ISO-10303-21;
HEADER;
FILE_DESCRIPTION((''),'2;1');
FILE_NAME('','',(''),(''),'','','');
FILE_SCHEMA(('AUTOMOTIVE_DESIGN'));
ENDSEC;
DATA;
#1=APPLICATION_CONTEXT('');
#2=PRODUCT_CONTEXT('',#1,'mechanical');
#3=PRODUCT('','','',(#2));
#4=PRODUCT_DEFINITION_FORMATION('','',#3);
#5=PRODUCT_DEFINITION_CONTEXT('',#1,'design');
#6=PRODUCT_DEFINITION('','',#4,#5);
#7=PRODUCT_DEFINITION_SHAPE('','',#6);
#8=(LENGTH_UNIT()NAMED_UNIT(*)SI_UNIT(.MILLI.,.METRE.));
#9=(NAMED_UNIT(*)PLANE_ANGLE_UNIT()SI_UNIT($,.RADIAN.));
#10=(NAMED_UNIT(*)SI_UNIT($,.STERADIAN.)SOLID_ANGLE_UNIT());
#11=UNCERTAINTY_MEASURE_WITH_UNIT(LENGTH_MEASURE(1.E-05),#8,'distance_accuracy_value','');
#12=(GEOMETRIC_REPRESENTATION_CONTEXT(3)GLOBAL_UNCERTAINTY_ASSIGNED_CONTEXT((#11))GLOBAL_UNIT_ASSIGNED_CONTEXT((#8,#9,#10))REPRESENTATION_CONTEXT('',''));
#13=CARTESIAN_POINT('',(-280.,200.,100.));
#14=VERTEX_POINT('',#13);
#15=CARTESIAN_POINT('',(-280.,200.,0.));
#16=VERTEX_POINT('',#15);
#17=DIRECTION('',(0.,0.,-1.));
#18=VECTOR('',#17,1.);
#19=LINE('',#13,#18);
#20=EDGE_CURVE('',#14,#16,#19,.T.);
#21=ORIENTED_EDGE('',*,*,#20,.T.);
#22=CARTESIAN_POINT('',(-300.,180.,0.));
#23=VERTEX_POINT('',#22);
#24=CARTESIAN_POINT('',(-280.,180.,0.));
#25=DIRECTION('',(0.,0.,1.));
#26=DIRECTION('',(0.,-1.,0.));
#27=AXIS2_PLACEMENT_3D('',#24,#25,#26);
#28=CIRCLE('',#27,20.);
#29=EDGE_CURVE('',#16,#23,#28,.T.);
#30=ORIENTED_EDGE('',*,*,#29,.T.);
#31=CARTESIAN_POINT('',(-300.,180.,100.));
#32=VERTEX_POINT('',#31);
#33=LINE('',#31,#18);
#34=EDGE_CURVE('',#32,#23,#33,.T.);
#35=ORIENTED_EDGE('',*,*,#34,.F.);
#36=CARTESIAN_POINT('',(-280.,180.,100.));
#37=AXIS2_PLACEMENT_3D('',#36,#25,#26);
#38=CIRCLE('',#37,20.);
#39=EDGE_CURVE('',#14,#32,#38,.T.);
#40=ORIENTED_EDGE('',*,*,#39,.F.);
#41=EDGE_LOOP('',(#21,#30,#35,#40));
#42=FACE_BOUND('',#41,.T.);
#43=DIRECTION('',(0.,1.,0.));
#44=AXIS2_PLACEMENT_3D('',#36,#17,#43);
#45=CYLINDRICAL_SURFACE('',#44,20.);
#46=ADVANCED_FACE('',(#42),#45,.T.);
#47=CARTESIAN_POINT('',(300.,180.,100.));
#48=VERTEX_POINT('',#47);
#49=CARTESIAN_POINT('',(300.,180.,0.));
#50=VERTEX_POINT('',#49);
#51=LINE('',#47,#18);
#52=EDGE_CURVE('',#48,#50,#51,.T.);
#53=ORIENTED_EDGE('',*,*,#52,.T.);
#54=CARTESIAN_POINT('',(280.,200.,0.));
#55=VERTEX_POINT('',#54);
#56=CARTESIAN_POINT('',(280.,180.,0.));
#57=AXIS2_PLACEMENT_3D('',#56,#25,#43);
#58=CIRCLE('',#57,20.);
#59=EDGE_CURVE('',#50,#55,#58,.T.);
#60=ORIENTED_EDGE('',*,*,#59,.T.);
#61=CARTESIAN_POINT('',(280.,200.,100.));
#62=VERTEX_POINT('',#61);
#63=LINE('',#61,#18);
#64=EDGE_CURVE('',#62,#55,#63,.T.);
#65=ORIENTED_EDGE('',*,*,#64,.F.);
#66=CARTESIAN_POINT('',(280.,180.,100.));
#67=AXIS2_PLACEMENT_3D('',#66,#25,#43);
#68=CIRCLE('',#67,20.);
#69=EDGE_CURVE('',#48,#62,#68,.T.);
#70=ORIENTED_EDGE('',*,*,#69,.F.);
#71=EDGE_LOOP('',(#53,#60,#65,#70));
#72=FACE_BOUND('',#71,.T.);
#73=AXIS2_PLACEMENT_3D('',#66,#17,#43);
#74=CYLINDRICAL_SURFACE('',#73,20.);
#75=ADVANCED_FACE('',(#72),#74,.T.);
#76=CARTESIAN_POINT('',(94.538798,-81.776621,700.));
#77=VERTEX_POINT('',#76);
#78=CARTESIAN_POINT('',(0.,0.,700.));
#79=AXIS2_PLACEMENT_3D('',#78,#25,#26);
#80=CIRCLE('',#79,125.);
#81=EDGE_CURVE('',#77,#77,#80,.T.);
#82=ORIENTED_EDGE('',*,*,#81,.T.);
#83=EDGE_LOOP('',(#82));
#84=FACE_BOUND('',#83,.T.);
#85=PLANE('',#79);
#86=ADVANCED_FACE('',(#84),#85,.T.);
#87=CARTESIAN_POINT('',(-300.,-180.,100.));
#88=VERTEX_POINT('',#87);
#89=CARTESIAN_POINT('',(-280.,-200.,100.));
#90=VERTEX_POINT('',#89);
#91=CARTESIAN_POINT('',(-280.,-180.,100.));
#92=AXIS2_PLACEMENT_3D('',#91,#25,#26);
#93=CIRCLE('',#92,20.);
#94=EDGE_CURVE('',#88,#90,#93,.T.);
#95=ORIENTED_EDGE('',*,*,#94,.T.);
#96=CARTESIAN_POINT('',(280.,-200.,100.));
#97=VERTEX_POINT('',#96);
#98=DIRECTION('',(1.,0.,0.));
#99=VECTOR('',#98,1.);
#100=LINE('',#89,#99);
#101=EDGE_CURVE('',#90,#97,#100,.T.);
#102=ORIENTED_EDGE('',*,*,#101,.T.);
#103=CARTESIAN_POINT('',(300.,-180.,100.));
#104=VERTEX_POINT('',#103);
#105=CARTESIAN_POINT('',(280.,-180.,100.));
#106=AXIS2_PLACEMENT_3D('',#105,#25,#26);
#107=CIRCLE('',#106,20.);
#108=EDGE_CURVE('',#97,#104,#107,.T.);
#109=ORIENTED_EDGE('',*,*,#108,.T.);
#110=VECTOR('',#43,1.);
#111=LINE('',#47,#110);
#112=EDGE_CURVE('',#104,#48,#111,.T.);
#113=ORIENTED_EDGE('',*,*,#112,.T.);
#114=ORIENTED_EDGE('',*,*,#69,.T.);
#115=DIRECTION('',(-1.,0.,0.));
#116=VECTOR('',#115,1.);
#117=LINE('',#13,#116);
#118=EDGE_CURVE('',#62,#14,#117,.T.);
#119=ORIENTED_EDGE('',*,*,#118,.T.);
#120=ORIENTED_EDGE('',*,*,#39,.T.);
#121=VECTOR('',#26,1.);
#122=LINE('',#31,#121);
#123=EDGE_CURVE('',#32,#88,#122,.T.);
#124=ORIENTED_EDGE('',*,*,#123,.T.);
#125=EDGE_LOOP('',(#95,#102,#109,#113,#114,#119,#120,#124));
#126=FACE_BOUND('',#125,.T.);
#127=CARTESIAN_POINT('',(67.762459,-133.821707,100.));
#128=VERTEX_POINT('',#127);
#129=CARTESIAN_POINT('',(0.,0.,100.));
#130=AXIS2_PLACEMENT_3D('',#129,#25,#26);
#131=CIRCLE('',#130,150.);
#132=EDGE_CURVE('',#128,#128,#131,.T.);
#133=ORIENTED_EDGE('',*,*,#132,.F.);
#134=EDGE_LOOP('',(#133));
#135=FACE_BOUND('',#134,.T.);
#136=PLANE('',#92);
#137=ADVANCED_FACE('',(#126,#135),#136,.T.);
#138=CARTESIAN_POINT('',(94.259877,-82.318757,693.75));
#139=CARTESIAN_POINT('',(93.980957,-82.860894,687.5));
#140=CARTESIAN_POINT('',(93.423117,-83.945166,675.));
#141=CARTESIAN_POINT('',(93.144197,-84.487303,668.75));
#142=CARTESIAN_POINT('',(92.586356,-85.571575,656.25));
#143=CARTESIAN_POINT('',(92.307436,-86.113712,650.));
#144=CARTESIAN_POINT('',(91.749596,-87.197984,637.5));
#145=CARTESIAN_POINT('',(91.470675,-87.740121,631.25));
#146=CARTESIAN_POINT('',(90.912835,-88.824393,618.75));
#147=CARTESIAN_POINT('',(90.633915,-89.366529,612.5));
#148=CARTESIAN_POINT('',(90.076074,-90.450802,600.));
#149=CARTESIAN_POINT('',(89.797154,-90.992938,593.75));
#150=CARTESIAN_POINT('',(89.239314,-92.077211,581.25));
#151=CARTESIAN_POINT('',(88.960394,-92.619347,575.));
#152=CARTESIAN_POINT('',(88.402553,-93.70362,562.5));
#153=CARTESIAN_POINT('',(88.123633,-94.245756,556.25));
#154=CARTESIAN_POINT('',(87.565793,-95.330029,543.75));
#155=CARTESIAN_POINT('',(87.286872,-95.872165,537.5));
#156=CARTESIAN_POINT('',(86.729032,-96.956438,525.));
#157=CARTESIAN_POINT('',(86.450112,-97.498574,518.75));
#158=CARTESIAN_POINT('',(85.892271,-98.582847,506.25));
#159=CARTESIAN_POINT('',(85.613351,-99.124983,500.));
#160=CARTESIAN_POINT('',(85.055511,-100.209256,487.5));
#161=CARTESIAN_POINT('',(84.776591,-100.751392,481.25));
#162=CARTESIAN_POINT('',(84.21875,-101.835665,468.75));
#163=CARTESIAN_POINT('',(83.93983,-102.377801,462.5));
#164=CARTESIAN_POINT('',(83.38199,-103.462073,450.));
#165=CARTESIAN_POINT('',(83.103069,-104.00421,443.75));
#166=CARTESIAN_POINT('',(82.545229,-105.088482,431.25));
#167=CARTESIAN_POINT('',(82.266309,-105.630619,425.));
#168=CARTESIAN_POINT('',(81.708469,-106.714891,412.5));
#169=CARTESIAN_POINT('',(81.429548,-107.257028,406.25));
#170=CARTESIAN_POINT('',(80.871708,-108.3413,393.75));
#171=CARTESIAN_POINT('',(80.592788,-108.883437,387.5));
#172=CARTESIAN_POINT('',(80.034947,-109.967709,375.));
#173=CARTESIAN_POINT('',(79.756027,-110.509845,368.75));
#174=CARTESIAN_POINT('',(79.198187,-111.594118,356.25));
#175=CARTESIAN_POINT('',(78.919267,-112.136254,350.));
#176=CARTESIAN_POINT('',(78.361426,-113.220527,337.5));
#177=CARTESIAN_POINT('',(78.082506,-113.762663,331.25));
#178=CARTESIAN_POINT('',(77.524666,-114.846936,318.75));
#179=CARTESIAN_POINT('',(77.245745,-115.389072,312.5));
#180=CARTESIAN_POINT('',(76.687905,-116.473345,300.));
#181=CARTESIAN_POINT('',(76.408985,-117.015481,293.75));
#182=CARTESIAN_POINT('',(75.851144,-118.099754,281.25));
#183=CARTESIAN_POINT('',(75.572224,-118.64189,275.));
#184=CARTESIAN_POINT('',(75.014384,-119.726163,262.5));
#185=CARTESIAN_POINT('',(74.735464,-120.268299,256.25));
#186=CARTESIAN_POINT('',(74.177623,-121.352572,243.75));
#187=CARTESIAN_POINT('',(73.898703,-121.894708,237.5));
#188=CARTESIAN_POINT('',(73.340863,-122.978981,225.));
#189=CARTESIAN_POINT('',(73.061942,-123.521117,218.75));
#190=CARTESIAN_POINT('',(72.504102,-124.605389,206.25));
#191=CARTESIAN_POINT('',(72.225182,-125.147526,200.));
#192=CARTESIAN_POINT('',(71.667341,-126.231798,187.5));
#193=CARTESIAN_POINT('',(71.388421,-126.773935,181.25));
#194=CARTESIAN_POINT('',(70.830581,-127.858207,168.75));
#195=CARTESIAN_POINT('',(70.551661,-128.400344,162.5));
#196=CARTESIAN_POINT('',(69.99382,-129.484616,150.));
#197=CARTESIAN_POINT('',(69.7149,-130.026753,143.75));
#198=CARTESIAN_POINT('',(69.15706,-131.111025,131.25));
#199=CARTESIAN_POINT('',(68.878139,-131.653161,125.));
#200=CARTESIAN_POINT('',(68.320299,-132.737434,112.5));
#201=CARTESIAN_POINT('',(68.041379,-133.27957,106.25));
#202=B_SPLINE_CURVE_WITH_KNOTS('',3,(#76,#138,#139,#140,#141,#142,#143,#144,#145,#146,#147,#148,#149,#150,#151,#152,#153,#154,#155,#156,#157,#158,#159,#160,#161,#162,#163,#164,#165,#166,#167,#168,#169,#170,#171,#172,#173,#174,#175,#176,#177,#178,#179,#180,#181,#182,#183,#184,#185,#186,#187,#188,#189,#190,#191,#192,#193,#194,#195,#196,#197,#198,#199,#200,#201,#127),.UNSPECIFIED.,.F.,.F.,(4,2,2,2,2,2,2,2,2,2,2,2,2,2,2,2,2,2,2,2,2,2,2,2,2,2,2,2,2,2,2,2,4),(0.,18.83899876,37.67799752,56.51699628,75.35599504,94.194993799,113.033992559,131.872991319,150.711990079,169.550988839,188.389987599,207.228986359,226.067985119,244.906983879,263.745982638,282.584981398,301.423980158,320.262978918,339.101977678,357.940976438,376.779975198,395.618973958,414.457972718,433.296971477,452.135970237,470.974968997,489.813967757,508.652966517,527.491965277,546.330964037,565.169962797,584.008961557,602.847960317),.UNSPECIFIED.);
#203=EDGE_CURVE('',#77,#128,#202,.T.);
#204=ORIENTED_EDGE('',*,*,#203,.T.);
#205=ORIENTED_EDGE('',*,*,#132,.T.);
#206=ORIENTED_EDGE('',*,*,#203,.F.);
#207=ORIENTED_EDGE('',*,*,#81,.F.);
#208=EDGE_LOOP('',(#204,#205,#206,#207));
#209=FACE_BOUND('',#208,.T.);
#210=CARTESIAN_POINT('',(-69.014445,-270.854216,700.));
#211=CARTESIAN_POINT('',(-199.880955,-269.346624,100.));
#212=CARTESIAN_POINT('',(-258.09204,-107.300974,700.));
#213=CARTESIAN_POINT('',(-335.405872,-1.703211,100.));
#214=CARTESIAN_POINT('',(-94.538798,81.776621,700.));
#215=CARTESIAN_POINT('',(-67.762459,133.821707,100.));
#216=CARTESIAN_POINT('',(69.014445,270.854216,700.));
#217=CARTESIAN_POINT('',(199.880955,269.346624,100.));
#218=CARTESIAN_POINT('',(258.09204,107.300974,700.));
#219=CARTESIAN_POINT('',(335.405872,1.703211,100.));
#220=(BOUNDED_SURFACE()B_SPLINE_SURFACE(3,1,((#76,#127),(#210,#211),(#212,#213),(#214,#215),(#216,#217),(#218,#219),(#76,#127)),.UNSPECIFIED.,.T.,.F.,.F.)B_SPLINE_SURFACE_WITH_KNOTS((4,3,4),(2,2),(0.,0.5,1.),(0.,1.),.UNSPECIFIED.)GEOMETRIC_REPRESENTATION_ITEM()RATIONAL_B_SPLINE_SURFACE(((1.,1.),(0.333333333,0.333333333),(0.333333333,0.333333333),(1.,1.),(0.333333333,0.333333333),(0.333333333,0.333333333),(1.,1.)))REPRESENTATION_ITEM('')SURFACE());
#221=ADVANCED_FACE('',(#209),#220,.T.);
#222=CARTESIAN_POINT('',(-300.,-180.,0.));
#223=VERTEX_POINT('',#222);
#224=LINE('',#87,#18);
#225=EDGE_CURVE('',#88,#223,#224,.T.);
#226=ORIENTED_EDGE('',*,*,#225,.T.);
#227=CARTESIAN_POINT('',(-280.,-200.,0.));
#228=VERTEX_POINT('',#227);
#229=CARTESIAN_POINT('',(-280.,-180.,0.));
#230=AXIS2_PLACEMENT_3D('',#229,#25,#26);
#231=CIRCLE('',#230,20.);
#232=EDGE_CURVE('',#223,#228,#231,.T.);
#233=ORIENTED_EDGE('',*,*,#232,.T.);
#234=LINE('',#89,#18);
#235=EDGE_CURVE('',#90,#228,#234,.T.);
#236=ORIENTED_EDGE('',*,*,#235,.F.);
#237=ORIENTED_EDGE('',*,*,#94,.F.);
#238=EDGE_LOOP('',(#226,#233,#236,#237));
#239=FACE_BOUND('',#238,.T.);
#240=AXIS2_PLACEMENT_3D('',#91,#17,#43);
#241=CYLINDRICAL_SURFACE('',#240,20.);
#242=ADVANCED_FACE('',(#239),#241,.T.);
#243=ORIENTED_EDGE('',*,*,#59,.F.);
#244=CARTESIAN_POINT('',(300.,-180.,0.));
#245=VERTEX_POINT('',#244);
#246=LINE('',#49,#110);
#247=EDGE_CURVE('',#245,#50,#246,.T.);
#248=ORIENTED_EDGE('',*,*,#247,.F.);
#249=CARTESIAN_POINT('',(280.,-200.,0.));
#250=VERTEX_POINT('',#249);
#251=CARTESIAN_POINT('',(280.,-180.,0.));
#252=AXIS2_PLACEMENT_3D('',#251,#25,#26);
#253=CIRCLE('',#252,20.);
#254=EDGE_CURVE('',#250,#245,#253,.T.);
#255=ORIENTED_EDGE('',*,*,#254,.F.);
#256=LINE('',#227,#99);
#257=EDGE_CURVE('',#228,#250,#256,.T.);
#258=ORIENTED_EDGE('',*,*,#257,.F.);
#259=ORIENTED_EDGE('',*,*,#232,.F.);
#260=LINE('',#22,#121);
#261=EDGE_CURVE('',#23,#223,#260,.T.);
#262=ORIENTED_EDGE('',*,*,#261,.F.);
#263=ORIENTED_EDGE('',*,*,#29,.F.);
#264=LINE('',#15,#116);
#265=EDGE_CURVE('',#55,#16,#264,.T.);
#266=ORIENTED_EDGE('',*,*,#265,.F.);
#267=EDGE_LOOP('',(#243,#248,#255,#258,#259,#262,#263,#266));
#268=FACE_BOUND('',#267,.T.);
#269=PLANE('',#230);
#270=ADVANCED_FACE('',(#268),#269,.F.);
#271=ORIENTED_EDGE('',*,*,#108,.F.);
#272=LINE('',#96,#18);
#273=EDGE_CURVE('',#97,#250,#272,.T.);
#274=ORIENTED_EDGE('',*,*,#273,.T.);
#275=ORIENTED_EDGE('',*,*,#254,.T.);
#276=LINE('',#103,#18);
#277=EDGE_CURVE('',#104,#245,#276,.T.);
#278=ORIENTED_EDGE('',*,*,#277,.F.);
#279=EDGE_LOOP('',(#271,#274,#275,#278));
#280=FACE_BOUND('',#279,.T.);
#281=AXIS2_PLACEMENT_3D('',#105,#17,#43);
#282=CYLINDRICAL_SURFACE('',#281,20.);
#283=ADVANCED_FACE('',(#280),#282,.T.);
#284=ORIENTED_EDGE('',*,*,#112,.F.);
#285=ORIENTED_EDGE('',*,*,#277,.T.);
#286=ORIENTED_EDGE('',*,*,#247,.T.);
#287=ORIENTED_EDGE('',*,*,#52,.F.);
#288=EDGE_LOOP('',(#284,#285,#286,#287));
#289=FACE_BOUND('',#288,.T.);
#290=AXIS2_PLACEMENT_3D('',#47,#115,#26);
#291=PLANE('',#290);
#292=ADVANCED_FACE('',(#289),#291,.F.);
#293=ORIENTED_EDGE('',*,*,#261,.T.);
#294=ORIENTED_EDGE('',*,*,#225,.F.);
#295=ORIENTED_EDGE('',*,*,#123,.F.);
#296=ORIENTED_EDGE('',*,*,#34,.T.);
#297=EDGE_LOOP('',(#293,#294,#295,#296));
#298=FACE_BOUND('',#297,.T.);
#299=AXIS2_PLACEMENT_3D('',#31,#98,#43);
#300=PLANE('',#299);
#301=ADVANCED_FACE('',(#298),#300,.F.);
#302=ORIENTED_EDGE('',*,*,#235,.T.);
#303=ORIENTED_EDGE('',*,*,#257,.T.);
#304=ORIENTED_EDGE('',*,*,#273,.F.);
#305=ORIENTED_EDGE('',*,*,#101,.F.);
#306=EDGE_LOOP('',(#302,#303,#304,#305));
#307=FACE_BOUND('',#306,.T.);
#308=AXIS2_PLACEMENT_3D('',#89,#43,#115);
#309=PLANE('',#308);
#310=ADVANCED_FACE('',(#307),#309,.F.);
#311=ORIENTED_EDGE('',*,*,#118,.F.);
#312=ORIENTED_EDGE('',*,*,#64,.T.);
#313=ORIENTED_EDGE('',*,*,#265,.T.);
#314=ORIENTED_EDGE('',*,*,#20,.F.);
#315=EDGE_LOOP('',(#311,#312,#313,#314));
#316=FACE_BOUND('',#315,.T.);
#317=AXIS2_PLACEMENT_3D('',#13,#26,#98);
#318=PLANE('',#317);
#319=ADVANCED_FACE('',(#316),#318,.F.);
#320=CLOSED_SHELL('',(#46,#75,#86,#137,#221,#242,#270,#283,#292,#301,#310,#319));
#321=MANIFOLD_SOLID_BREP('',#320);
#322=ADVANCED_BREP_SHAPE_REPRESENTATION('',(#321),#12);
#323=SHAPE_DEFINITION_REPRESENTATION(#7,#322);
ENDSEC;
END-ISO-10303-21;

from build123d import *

# Parameters (mm, degrees)
BOSS_EXTRUDE3_DEPTH   = 100
BODY_MOVE_COPY2_ANGLE = 90


with BuildPart() as part:
    # Sketch4 → Boss-Extrude3 (new body)
    with BuildSketch(Plane(origin=(0, 0, 0), x_dir=(1, 0, 0), z_dir=(0, 1, 0))):
        with BuildLine():
            Line((-280, 200), (280, 200))
            ThreePointArc((280, 200), (294.142135624, 194.142135624), (300, 180))
            Line((300, 180), (300, -180))
            ThreePointArc((300, -180), (294.142135624, -194.142135624), (280, -200))
            Line((280, -200), (-280, -200))
            ThreePointArc((-280, -200), (-294.142135624, -194.142135624), (-300, -180))
            Line((-300, -180), (-300, 180))
            ThreePointArc((-300, 180), (-294.142135624, 194.142135624), (-280, 200))
        make_face()
    extrude(amount=BOSS_EXTRUDE3_DEPTH)

    # Loft1: read off the stored shape, not the designer's step
    # Loft1: loft between two sections, ruled curve by curve
    loft1_from = [
        Edge.make_bspline([(94.538797531, 700, 81.776621117), (-69.014444703, 700, 270.85421618), (-258.092039765, 700, 107.300973946), (-94.538797531, 700, -81.776621117), (69.014444703, 700, -270.85421618), (258.092039765, 700, -107.300973946), (94.538797531, 700, 81.776621117)], [0, 0, 0, 0, 0.5, 0.5, 0.5, 1, 1, 1, 1], 3, [1, 0.333333333, 0.333333333, 1, 0.333333333, 0.333333333, 1]),
    ]
    loft1_to = [
        Edge.make_bspline([(67.762458695, 100, 133.821706728), (-199.880954762, 100, 269.346624118), (-335.405872151, 100, 1.703210661), (-67.762458695, 100, -133.821706728), (199.880954762, 100, -269.346624118), (335.405872151, 100, -1.703210661), (67.762458695, 100, 133.821706728)], [0, 0, 0, 0, 0.5, 0.5, 0.5, 1, 1, 1, 1], 3, [1, 0.333333333, 0.333333333, 1, 0.333333333, 0.333333333, 1]),
    ]
    loft1 = Solid(Shell([*[Face.make_surface_from_curves(loft1_from[k], loft1_to[k]) for k in range(1)], Face(Wire(loft1_from)), Face(Wire(loft1_to))]))
    add(loft1)


with BuildPart() as part_1:
    # Body-Move/Copy2: moved
    add(part.part.rotate(Axis((0, 0, 0), (1, 0, 0)), BODY_MOVE_COPY2_ANGLE))


solid = part_1.part
